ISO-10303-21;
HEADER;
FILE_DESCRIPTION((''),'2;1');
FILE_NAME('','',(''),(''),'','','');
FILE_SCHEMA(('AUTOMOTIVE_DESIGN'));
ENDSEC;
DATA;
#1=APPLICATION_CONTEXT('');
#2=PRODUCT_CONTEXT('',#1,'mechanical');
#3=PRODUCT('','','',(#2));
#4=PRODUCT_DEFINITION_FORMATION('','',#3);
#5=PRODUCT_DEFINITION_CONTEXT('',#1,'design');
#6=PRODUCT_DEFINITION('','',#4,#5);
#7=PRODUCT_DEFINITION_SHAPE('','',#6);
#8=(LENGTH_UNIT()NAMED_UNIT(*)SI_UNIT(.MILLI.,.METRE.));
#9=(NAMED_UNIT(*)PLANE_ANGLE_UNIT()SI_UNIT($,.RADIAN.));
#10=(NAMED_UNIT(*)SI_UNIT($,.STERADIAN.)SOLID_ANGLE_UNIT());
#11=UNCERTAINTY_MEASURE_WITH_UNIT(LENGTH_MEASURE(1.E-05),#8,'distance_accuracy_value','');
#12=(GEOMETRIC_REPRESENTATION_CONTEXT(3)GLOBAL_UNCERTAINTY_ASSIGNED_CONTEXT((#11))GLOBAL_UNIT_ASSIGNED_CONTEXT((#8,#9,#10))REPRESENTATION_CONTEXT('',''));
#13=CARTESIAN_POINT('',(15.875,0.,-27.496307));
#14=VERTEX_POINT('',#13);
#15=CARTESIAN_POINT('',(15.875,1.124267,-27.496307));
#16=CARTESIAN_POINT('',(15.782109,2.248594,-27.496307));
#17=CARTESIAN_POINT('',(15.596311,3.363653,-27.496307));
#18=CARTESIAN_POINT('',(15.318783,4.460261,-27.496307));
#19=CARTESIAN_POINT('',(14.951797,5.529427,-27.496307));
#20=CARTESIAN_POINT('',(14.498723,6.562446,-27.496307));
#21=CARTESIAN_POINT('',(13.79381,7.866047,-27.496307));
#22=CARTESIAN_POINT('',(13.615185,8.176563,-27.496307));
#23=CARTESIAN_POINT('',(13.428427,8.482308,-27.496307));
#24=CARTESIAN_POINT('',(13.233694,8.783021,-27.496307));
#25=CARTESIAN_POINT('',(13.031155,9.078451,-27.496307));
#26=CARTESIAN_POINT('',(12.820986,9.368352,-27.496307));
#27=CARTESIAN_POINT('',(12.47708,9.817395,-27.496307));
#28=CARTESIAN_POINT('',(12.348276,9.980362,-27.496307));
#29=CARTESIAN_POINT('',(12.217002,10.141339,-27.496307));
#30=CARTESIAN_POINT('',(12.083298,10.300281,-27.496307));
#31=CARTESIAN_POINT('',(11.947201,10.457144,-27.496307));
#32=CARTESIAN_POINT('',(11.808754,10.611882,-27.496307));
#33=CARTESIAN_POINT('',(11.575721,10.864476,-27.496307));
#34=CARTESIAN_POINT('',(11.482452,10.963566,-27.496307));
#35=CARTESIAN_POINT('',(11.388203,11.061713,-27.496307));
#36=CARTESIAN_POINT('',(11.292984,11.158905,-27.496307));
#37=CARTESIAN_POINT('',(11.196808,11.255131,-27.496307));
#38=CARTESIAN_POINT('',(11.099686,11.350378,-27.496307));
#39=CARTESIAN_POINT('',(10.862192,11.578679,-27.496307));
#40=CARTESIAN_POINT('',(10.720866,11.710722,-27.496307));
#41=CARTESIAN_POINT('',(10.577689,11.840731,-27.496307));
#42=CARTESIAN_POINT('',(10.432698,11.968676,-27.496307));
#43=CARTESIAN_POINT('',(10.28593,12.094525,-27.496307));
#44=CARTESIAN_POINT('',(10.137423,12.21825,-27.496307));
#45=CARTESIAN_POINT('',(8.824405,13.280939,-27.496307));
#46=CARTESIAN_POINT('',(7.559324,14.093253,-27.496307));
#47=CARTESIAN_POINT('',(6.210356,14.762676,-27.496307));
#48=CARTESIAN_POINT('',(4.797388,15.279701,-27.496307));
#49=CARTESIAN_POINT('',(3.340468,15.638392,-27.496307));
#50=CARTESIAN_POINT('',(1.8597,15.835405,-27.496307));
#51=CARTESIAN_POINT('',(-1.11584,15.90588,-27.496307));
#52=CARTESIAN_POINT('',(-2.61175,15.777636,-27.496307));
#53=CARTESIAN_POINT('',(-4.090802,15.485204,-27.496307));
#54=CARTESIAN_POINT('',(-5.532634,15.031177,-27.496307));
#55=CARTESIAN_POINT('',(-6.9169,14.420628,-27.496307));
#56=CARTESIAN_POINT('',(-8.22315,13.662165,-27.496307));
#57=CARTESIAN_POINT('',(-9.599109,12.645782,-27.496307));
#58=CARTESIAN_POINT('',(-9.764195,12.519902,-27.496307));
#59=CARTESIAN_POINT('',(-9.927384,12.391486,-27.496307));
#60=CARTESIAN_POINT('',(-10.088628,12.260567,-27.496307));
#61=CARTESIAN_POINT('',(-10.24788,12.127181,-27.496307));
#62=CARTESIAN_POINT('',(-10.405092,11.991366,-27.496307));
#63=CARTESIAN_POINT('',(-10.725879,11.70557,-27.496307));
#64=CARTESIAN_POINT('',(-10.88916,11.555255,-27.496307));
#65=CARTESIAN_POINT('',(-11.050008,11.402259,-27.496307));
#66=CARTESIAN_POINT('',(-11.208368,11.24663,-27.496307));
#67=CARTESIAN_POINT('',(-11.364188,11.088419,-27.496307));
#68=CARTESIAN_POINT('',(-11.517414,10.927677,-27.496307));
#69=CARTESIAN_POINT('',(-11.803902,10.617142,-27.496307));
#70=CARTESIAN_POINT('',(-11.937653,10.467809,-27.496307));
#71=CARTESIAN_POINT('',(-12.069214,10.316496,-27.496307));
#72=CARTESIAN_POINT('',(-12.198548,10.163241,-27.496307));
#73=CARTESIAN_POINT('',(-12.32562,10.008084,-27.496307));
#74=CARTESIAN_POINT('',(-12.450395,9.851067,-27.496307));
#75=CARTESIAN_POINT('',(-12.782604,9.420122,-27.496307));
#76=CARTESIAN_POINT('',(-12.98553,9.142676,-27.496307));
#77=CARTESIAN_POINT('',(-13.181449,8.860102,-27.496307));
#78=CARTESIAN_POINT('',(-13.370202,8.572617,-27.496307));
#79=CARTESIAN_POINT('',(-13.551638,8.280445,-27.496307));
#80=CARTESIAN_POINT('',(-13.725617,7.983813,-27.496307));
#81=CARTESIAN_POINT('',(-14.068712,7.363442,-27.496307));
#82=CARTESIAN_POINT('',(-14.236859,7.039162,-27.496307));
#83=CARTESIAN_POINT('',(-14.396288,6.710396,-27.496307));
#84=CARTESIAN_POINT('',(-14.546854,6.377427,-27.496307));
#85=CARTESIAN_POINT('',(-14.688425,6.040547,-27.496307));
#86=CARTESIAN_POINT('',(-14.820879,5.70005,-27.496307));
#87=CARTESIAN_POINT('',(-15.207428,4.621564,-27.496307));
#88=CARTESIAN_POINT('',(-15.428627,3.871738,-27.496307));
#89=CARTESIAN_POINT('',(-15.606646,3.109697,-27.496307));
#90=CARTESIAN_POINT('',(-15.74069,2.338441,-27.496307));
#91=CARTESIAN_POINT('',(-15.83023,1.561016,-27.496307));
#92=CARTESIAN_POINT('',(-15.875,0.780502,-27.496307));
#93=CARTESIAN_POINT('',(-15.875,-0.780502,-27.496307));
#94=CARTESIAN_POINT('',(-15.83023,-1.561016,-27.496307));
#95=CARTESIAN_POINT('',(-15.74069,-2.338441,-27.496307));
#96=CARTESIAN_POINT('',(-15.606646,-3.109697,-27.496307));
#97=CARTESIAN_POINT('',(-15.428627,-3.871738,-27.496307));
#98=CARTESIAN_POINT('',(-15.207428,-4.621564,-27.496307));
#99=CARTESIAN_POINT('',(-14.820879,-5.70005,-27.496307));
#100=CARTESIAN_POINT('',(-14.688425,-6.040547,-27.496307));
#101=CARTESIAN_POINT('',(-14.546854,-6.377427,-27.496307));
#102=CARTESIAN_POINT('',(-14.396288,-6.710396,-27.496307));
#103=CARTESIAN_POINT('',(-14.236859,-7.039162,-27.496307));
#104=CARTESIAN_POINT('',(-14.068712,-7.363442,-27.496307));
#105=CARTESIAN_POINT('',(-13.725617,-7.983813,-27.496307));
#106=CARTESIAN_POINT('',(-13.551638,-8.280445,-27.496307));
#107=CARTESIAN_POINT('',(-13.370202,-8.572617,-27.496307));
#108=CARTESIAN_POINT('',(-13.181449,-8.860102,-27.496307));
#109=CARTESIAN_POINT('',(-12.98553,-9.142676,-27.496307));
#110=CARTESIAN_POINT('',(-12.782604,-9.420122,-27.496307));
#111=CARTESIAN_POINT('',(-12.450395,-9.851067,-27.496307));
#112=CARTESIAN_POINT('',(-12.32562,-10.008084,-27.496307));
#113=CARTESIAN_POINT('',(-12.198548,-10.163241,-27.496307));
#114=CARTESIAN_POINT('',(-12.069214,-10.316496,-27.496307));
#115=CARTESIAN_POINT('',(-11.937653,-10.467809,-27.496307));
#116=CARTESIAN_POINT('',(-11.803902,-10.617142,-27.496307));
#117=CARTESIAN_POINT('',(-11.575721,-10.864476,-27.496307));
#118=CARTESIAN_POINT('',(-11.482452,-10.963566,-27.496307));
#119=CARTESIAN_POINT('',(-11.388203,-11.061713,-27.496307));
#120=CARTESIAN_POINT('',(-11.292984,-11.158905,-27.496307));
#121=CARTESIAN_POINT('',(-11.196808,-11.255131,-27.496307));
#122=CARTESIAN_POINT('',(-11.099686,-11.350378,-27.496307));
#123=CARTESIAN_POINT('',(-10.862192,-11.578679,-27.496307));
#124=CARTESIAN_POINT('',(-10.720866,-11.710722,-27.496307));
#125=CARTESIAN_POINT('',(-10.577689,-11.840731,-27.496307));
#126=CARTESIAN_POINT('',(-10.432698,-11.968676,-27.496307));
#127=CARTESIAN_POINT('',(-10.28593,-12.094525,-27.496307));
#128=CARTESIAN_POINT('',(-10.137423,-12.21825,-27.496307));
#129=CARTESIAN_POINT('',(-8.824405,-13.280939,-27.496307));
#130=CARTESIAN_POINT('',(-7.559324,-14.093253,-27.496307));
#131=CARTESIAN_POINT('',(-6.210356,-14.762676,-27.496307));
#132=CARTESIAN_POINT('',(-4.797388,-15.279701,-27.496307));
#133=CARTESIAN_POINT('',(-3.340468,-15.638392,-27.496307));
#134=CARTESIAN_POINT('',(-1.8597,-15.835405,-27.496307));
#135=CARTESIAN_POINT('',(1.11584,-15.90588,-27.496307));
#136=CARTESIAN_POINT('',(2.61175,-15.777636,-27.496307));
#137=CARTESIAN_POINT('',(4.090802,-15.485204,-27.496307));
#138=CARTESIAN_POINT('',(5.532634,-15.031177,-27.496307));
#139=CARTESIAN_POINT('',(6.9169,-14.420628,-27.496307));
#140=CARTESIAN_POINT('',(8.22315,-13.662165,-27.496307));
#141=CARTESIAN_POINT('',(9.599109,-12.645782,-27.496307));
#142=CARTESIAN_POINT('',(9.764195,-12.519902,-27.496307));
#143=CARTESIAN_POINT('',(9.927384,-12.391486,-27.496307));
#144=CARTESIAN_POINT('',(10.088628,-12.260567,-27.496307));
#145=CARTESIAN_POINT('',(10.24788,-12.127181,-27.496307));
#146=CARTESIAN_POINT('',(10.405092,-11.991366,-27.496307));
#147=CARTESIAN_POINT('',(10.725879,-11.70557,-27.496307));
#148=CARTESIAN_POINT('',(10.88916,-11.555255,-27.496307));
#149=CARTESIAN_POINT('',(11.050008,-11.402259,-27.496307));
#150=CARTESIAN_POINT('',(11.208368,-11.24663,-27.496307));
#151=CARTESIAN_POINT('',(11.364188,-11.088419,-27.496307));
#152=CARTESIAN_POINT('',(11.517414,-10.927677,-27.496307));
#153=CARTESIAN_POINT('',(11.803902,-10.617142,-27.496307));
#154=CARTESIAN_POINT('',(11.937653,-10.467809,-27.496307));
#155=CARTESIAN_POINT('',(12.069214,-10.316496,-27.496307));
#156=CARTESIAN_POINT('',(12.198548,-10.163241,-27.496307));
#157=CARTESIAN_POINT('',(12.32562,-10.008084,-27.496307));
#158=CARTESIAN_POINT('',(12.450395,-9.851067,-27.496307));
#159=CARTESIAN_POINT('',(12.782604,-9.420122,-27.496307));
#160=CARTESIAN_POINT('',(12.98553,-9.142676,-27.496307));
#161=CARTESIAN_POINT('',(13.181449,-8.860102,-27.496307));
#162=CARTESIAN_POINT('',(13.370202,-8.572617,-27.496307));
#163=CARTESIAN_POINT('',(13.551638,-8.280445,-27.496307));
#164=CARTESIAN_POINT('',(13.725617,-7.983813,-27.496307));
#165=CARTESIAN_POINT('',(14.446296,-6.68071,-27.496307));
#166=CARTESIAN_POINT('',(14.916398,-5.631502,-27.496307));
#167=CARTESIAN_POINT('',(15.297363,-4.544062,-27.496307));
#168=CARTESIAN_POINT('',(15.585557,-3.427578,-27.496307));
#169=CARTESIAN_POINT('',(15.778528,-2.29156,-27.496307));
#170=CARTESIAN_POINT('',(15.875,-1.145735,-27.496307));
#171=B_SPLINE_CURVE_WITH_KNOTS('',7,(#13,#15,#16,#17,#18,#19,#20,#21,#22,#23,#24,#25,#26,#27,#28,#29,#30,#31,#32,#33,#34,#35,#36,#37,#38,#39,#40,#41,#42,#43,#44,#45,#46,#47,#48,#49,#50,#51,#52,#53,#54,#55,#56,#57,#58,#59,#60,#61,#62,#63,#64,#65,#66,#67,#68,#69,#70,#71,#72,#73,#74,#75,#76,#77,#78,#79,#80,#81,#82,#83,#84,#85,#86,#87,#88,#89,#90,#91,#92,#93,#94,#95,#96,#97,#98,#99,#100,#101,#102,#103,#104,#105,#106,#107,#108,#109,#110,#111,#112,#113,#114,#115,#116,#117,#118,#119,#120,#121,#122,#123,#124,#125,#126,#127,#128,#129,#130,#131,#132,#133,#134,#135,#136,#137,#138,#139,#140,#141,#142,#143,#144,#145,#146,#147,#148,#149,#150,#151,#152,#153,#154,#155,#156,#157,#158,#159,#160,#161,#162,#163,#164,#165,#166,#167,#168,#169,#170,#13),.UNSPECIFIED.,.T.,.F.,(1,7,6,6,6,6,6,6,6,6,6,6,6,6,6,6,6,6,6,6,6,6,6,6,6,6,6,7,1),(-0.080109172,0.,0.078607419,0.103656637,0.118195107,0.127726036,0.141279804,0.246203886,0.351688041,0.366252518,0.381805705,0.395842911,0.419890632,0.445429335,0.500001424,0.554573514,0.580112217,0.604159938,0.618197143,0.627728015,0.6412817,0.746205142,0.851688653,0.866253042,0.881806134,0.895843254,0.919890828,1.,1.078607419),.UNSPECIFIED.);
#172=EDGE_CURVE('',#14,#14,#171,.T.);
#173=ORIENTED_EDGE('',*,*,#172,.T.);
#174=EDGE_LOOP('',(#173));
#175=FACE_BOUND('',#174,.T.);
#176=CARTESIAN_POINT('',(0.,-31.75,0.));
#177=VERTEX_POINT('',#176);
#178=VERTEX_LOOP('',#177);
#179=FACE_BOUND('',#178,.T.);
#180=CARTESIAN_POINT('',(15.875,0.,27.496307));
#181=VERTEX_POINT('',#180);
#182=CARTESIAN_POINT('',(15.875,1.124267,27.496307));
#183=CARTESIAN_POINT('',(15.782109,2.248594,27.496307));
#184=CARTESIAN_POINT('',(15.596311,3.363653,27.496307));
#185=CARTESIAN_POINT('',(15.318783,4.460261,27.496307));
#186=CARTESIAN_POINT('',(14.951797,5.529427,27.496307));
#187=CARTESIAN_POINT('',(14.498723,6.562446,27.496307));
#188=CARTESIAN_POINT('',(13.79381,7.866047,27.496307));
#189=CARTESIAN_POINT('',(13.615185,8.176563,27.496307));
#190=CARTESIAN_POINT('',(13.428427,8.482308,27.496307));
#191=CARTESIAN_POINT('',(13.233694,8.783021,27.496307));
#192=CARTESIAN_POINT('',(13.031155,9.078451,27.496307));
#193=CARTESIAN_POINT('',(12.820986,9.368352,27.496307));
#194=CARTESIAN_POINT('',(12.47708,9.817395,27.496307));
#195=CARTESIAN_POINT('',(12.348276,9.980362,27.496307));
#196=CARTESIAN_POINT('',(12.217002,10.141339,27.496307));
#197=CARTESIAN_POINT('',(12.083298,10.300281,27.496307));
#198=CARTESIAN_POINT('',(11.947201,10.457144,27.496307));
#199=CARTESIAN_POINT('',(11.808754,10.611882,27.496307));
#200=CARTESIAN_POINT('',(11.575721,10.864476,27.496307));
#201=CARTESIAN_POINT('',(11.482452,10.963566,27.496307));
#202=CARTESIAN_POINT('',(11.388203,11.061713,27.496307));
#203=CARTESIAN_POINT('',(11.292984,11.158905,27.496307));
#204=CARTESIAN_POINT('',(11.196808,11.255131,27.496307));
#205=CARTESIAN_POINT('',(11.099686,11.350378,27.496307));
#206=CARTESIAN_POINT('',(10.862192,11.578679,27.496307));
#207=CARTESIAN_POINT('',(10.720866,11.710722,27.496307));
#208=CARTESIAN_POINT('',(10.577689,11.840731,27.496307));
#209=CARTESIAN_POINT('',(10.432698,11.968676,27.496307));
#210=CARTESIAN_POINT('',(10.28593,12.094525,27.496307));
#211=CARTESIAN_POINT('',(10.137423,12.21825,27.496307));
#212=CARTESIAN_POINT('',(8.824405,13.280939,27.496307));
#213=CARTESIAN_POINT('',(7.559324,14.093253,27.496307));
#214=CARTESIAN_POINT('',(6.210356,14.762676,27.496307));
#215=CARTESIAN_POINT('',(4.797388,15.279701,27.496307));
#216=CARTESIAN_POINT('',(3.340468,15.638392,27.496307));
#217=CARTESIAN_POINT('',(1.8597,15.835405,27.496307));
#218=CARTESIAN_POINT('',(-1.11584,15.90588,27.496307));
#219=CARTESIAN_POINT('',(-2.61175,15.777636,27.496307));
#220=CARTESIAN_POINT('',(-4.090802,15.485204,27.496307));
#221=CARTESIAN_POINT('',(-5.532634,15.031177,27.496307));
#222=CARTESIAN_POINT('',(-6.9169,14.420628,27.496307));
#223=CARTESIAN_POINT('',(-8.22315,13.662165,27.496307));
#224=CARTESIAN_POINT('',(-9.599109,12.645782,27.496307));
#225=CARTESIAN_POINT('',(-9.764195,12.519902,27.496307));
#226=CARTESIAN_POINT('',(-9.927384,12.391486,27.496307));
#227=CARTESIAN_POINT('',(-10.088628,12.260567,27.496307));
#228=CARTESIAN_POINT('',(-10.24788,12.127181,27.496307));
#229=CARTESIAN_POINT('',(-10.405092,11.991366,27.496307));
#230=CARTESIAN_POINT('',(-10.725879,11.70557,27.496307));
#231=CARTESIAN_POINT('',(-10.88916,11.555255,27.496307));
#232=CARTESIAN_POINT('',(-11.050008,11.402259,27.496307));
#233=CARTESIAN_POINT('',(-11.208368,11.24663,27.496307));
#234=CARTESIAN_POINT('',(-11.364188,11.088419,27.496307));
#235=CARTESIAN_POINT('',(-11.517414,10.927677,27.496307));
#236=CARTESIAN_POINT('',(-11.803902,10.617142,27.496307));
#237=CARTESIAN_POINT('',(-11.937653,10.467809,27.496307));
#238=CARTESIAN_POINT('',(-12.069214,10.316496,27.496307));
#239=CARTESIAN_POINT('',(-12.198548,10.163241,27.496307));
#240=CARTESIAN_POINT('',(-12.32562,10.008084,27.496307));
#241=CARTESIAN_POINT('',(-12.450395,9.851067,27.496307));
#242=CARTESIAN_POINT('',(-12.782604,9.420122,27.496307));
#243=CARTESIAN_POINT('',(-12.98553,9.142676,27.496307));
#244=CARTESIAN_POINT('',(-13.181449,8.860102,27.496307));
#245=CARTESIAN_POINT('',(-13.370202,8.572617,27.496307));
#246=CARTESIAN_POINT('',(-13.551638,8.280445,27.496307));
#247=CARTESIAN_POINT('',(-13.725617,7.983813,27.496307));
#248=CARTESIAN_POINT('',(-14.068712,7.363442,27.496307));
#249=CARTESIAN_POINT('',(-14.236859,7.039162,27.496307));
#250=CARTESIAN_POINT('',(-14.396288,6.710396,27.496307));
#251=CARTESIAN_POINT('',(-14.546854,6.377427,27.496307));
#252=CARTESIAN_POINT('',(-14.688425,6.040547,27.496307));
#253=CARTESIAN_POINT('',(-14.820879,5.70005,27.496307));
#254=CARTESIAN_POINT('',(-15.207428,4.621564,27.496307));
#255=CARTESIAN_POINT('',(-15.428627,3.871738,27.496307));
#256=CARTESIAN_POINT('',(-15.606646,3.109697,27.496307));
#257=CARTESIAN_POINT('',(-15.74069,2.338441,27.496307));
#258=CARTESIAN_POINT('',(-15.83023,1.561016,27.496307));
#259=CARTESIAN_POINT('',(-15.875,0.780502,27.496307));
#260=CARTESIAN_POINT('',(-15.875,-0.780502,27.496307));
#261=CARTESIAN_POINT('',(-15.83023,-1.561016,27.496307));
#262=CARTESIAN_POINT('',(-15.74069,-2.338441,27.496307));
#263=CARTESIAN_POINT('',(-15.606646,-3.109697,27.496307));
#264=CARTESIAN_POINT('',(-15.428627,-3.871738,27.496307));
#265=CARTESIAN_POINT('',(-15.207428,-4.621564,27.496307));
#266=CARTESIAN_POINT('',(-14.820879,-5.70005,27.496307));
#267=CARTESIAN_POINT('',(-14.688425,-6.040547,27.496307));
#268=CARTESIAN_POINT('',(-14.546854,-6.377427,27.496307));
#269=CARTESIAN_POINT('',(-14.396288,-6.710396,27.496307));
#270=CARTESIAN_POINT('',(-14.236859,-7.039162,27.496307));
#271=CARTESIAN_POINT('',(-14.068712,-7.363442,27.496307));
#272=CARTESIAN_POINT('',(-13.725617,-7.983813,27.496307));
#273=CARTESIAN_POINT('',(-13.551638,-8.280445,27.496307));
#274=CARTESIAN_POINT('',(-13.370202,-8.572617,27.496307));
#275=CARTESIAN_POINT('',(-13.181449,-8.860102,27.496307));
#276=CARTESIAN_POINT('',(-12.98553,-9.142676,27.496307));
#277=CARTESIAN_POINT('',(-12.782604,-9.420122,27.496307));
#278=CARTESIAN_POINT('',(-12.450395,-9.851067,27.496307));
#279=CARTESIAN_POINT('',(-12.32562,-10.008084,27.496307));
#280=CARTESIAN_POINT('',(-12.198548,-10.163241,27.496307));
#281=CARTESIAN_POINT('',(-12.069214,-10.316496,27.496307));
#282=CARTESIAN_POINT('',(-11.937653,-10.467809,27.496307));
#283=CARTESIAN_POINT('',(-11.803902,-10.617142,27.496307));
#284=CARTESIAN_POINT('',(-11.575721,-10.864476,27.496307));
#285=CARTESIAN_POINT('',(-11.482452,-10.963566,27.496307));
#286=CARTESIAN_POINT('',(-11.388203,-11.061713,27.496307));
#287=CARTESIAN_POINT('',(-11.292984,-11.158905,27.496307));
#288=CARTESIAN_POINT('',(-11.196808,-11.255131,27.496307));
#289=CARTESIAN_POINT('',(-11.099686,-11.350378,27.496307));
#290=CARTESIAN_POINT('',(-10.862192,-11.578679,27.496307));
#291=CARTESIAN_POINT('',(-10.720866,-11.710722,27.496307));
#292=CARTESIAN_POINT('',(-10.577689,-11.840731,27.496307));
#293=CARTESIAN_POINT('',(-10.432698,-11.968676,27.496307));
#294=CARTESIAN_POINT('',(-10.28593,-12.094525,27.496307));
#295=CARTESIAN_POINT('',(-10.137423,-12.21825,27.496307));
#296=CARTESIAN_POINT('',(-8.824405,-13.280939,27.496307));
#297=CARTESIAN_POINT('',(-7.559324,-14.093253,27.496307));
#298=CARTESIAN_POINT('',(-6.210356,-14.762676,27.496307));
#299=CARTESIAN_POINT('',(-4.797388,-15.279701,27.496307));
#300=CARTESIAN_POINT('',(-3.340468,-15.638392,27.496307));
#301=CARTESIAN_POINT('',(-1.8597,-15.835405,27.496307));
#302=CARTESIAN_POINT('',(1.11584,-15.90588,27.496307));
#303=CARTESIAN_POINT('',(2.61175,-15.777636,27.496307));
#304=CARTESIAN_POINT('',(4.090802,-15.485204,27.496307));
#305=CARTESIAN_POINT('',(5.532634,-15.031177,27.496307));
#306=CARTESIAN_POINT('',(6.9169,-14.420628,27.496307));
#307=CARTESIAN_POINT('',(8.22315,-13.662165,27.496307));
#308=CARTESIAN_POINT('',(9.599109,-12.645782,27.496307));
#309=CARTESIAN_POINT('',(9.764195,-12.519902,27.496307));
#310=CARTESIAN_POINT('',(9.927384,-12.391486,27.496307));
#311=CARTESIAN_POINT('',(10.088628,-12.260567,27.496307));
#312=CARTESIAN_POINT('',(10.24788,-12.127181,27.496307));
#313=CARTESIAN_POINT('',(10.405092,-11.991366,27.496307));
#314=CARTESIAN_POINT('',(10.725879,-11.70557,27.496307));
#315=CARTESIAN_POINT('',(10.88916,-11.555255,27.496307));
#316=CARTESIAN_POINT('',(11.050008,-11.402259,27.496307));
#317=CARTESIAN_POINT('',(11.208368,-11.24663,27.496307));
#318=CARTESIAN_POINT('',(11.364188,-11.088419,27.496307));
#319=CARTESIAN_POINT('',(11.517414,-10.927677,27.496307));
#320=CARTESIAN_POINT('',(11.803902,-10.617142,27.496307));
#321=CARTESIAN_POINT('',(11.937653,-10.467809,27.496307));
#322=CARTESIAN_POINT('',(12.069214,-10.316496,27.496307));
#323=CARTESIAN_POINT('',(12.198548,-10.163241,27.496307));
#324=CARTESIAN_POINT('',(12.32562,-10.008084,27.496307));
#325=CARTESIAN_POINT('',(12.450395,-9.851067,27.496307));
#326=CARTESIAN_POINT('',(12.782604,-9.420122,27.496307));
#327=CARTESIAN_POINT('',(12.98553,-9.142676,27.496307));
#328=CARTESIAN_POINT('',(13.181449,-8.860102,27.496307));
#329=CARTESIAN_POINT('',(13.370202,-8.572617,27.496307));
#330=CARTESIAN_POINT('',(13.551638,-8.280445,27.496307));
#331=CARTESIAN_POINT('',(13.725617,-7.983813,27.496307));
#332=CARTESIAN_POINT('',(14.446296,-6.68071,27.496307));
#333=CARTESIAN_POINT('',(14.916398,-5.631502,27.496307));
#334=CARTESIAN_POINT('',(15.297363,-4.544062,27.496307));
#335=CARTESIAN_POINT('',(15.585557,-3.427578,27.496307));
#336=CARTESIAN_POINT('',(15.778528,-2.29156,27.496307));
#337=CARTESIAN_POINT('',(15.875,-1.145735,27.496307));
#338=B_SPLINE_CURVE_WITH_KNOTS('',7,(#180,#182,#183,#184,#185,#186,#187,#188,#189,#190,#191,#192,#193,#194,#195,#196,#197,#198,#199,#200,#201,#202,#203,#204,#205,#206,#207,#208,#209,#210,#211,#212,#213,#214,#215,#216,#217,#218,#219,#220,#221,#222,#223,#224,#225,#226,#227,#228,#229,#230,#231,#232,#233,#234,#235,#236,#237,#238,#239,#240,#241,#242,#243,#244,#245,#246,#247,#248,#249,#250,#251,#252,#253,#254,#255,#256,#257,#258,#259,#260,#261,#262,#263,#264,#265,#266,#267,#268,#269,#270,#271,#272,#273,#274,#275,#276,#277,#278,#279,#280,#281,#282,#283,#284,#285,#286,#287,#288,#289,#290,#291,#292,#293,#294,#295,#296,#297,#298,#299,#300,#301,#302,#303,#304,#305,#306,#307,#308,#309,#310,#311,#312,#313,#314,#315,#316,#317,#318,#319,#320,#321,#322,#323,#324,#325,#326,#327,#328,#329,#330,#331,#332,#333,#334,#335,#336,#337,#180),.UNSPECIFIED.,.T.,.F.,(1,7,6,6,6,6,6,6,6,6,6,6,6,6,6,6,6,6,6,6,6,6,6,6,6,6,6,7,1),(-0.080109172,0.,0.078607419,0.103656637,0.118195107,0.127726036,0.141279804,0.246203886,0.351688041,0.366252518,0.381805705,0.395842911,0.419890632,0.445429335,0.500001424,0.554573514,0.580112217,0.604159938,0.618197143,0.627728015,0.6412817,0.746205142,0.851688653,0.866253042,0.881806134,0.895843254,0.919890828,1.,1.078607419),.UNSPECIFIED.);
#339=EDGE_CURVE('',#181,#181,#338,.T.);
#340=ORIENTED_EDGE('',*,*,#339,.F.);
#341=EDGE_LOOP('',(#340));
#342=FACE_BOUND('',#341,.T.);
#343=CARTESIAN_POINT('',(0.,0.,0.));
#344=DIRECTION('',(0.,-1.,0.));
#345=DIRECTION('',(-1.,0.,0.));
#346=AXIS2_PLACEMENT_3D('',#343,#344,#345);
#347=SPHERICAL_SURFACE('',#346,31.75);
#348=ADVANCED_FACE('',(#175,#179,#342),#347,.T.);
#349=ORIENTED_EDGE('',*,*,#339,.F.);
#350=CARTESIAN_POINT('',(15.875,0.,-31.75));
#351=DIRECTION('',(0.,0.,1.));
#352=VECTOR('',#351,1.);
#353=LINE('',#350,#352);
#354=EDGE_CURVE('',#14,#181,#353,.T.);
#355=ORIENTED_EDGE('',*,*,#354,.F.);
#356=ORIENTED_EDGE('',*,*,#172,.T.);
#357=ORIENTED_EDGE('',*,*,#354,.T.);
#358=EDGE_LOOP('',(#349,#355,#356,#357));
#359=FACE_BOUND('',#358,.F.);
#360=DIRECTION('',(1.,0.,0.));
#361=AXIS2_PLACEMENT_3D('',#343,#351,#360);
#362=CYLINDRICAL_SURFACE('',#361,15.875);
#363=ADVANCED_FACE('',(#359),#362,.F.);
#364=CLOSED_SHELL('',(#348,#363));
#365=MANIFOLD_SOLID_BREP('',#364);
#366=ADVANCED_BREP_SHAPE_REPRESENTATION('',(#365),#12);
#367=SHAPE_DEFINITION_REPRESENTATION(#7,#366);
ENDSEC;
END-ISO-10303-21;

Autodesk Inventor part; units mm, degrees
ref_plane "YZ Plane" through (0, 0, 0) normal (1, 0, 0) x (0, 1, 0)
ref_plane "XZ Plane" through (0, 0, 0) normal (0, 1, 0) x (-1, 0, 0)
ref_plane "XY Plane" through (0, 0, 0) normal (0, 0, 1) x (1, 0, 0)
sketch "Sketch1" plane through (0, 0, 0) normal (0, 0, 1) x (1, 0, 0)
  line L0 (0, 4.445) -> (0, -4.445) projected
  arc A0 (0, 3.175) -> (0, -3.175) centre (0, 0) ccw
  circle A1 centre (0, 0) radius 1.5875
  line L1 (0, 3.175) -> (0, -3.175)
  dimension "d0" = 3.175
  dimension "d1" = 3.175
revolve "Revolution1" add sketch "Sketch1" angle 360 about axis through (0, 0, 0) along (0, -1, 0) picked at (-0.4775, -0.3807) contours L0 A1 A0 | L0 A1
extrude "Extrusion1" cut sketch "Sketch1" along normal mid plane 6.35 contours A1 L0 | L0 A1
scale "Scale1" factors (10, 10, 10) then translate (0, 0, 0) bodies 1
properties part number "ball"
